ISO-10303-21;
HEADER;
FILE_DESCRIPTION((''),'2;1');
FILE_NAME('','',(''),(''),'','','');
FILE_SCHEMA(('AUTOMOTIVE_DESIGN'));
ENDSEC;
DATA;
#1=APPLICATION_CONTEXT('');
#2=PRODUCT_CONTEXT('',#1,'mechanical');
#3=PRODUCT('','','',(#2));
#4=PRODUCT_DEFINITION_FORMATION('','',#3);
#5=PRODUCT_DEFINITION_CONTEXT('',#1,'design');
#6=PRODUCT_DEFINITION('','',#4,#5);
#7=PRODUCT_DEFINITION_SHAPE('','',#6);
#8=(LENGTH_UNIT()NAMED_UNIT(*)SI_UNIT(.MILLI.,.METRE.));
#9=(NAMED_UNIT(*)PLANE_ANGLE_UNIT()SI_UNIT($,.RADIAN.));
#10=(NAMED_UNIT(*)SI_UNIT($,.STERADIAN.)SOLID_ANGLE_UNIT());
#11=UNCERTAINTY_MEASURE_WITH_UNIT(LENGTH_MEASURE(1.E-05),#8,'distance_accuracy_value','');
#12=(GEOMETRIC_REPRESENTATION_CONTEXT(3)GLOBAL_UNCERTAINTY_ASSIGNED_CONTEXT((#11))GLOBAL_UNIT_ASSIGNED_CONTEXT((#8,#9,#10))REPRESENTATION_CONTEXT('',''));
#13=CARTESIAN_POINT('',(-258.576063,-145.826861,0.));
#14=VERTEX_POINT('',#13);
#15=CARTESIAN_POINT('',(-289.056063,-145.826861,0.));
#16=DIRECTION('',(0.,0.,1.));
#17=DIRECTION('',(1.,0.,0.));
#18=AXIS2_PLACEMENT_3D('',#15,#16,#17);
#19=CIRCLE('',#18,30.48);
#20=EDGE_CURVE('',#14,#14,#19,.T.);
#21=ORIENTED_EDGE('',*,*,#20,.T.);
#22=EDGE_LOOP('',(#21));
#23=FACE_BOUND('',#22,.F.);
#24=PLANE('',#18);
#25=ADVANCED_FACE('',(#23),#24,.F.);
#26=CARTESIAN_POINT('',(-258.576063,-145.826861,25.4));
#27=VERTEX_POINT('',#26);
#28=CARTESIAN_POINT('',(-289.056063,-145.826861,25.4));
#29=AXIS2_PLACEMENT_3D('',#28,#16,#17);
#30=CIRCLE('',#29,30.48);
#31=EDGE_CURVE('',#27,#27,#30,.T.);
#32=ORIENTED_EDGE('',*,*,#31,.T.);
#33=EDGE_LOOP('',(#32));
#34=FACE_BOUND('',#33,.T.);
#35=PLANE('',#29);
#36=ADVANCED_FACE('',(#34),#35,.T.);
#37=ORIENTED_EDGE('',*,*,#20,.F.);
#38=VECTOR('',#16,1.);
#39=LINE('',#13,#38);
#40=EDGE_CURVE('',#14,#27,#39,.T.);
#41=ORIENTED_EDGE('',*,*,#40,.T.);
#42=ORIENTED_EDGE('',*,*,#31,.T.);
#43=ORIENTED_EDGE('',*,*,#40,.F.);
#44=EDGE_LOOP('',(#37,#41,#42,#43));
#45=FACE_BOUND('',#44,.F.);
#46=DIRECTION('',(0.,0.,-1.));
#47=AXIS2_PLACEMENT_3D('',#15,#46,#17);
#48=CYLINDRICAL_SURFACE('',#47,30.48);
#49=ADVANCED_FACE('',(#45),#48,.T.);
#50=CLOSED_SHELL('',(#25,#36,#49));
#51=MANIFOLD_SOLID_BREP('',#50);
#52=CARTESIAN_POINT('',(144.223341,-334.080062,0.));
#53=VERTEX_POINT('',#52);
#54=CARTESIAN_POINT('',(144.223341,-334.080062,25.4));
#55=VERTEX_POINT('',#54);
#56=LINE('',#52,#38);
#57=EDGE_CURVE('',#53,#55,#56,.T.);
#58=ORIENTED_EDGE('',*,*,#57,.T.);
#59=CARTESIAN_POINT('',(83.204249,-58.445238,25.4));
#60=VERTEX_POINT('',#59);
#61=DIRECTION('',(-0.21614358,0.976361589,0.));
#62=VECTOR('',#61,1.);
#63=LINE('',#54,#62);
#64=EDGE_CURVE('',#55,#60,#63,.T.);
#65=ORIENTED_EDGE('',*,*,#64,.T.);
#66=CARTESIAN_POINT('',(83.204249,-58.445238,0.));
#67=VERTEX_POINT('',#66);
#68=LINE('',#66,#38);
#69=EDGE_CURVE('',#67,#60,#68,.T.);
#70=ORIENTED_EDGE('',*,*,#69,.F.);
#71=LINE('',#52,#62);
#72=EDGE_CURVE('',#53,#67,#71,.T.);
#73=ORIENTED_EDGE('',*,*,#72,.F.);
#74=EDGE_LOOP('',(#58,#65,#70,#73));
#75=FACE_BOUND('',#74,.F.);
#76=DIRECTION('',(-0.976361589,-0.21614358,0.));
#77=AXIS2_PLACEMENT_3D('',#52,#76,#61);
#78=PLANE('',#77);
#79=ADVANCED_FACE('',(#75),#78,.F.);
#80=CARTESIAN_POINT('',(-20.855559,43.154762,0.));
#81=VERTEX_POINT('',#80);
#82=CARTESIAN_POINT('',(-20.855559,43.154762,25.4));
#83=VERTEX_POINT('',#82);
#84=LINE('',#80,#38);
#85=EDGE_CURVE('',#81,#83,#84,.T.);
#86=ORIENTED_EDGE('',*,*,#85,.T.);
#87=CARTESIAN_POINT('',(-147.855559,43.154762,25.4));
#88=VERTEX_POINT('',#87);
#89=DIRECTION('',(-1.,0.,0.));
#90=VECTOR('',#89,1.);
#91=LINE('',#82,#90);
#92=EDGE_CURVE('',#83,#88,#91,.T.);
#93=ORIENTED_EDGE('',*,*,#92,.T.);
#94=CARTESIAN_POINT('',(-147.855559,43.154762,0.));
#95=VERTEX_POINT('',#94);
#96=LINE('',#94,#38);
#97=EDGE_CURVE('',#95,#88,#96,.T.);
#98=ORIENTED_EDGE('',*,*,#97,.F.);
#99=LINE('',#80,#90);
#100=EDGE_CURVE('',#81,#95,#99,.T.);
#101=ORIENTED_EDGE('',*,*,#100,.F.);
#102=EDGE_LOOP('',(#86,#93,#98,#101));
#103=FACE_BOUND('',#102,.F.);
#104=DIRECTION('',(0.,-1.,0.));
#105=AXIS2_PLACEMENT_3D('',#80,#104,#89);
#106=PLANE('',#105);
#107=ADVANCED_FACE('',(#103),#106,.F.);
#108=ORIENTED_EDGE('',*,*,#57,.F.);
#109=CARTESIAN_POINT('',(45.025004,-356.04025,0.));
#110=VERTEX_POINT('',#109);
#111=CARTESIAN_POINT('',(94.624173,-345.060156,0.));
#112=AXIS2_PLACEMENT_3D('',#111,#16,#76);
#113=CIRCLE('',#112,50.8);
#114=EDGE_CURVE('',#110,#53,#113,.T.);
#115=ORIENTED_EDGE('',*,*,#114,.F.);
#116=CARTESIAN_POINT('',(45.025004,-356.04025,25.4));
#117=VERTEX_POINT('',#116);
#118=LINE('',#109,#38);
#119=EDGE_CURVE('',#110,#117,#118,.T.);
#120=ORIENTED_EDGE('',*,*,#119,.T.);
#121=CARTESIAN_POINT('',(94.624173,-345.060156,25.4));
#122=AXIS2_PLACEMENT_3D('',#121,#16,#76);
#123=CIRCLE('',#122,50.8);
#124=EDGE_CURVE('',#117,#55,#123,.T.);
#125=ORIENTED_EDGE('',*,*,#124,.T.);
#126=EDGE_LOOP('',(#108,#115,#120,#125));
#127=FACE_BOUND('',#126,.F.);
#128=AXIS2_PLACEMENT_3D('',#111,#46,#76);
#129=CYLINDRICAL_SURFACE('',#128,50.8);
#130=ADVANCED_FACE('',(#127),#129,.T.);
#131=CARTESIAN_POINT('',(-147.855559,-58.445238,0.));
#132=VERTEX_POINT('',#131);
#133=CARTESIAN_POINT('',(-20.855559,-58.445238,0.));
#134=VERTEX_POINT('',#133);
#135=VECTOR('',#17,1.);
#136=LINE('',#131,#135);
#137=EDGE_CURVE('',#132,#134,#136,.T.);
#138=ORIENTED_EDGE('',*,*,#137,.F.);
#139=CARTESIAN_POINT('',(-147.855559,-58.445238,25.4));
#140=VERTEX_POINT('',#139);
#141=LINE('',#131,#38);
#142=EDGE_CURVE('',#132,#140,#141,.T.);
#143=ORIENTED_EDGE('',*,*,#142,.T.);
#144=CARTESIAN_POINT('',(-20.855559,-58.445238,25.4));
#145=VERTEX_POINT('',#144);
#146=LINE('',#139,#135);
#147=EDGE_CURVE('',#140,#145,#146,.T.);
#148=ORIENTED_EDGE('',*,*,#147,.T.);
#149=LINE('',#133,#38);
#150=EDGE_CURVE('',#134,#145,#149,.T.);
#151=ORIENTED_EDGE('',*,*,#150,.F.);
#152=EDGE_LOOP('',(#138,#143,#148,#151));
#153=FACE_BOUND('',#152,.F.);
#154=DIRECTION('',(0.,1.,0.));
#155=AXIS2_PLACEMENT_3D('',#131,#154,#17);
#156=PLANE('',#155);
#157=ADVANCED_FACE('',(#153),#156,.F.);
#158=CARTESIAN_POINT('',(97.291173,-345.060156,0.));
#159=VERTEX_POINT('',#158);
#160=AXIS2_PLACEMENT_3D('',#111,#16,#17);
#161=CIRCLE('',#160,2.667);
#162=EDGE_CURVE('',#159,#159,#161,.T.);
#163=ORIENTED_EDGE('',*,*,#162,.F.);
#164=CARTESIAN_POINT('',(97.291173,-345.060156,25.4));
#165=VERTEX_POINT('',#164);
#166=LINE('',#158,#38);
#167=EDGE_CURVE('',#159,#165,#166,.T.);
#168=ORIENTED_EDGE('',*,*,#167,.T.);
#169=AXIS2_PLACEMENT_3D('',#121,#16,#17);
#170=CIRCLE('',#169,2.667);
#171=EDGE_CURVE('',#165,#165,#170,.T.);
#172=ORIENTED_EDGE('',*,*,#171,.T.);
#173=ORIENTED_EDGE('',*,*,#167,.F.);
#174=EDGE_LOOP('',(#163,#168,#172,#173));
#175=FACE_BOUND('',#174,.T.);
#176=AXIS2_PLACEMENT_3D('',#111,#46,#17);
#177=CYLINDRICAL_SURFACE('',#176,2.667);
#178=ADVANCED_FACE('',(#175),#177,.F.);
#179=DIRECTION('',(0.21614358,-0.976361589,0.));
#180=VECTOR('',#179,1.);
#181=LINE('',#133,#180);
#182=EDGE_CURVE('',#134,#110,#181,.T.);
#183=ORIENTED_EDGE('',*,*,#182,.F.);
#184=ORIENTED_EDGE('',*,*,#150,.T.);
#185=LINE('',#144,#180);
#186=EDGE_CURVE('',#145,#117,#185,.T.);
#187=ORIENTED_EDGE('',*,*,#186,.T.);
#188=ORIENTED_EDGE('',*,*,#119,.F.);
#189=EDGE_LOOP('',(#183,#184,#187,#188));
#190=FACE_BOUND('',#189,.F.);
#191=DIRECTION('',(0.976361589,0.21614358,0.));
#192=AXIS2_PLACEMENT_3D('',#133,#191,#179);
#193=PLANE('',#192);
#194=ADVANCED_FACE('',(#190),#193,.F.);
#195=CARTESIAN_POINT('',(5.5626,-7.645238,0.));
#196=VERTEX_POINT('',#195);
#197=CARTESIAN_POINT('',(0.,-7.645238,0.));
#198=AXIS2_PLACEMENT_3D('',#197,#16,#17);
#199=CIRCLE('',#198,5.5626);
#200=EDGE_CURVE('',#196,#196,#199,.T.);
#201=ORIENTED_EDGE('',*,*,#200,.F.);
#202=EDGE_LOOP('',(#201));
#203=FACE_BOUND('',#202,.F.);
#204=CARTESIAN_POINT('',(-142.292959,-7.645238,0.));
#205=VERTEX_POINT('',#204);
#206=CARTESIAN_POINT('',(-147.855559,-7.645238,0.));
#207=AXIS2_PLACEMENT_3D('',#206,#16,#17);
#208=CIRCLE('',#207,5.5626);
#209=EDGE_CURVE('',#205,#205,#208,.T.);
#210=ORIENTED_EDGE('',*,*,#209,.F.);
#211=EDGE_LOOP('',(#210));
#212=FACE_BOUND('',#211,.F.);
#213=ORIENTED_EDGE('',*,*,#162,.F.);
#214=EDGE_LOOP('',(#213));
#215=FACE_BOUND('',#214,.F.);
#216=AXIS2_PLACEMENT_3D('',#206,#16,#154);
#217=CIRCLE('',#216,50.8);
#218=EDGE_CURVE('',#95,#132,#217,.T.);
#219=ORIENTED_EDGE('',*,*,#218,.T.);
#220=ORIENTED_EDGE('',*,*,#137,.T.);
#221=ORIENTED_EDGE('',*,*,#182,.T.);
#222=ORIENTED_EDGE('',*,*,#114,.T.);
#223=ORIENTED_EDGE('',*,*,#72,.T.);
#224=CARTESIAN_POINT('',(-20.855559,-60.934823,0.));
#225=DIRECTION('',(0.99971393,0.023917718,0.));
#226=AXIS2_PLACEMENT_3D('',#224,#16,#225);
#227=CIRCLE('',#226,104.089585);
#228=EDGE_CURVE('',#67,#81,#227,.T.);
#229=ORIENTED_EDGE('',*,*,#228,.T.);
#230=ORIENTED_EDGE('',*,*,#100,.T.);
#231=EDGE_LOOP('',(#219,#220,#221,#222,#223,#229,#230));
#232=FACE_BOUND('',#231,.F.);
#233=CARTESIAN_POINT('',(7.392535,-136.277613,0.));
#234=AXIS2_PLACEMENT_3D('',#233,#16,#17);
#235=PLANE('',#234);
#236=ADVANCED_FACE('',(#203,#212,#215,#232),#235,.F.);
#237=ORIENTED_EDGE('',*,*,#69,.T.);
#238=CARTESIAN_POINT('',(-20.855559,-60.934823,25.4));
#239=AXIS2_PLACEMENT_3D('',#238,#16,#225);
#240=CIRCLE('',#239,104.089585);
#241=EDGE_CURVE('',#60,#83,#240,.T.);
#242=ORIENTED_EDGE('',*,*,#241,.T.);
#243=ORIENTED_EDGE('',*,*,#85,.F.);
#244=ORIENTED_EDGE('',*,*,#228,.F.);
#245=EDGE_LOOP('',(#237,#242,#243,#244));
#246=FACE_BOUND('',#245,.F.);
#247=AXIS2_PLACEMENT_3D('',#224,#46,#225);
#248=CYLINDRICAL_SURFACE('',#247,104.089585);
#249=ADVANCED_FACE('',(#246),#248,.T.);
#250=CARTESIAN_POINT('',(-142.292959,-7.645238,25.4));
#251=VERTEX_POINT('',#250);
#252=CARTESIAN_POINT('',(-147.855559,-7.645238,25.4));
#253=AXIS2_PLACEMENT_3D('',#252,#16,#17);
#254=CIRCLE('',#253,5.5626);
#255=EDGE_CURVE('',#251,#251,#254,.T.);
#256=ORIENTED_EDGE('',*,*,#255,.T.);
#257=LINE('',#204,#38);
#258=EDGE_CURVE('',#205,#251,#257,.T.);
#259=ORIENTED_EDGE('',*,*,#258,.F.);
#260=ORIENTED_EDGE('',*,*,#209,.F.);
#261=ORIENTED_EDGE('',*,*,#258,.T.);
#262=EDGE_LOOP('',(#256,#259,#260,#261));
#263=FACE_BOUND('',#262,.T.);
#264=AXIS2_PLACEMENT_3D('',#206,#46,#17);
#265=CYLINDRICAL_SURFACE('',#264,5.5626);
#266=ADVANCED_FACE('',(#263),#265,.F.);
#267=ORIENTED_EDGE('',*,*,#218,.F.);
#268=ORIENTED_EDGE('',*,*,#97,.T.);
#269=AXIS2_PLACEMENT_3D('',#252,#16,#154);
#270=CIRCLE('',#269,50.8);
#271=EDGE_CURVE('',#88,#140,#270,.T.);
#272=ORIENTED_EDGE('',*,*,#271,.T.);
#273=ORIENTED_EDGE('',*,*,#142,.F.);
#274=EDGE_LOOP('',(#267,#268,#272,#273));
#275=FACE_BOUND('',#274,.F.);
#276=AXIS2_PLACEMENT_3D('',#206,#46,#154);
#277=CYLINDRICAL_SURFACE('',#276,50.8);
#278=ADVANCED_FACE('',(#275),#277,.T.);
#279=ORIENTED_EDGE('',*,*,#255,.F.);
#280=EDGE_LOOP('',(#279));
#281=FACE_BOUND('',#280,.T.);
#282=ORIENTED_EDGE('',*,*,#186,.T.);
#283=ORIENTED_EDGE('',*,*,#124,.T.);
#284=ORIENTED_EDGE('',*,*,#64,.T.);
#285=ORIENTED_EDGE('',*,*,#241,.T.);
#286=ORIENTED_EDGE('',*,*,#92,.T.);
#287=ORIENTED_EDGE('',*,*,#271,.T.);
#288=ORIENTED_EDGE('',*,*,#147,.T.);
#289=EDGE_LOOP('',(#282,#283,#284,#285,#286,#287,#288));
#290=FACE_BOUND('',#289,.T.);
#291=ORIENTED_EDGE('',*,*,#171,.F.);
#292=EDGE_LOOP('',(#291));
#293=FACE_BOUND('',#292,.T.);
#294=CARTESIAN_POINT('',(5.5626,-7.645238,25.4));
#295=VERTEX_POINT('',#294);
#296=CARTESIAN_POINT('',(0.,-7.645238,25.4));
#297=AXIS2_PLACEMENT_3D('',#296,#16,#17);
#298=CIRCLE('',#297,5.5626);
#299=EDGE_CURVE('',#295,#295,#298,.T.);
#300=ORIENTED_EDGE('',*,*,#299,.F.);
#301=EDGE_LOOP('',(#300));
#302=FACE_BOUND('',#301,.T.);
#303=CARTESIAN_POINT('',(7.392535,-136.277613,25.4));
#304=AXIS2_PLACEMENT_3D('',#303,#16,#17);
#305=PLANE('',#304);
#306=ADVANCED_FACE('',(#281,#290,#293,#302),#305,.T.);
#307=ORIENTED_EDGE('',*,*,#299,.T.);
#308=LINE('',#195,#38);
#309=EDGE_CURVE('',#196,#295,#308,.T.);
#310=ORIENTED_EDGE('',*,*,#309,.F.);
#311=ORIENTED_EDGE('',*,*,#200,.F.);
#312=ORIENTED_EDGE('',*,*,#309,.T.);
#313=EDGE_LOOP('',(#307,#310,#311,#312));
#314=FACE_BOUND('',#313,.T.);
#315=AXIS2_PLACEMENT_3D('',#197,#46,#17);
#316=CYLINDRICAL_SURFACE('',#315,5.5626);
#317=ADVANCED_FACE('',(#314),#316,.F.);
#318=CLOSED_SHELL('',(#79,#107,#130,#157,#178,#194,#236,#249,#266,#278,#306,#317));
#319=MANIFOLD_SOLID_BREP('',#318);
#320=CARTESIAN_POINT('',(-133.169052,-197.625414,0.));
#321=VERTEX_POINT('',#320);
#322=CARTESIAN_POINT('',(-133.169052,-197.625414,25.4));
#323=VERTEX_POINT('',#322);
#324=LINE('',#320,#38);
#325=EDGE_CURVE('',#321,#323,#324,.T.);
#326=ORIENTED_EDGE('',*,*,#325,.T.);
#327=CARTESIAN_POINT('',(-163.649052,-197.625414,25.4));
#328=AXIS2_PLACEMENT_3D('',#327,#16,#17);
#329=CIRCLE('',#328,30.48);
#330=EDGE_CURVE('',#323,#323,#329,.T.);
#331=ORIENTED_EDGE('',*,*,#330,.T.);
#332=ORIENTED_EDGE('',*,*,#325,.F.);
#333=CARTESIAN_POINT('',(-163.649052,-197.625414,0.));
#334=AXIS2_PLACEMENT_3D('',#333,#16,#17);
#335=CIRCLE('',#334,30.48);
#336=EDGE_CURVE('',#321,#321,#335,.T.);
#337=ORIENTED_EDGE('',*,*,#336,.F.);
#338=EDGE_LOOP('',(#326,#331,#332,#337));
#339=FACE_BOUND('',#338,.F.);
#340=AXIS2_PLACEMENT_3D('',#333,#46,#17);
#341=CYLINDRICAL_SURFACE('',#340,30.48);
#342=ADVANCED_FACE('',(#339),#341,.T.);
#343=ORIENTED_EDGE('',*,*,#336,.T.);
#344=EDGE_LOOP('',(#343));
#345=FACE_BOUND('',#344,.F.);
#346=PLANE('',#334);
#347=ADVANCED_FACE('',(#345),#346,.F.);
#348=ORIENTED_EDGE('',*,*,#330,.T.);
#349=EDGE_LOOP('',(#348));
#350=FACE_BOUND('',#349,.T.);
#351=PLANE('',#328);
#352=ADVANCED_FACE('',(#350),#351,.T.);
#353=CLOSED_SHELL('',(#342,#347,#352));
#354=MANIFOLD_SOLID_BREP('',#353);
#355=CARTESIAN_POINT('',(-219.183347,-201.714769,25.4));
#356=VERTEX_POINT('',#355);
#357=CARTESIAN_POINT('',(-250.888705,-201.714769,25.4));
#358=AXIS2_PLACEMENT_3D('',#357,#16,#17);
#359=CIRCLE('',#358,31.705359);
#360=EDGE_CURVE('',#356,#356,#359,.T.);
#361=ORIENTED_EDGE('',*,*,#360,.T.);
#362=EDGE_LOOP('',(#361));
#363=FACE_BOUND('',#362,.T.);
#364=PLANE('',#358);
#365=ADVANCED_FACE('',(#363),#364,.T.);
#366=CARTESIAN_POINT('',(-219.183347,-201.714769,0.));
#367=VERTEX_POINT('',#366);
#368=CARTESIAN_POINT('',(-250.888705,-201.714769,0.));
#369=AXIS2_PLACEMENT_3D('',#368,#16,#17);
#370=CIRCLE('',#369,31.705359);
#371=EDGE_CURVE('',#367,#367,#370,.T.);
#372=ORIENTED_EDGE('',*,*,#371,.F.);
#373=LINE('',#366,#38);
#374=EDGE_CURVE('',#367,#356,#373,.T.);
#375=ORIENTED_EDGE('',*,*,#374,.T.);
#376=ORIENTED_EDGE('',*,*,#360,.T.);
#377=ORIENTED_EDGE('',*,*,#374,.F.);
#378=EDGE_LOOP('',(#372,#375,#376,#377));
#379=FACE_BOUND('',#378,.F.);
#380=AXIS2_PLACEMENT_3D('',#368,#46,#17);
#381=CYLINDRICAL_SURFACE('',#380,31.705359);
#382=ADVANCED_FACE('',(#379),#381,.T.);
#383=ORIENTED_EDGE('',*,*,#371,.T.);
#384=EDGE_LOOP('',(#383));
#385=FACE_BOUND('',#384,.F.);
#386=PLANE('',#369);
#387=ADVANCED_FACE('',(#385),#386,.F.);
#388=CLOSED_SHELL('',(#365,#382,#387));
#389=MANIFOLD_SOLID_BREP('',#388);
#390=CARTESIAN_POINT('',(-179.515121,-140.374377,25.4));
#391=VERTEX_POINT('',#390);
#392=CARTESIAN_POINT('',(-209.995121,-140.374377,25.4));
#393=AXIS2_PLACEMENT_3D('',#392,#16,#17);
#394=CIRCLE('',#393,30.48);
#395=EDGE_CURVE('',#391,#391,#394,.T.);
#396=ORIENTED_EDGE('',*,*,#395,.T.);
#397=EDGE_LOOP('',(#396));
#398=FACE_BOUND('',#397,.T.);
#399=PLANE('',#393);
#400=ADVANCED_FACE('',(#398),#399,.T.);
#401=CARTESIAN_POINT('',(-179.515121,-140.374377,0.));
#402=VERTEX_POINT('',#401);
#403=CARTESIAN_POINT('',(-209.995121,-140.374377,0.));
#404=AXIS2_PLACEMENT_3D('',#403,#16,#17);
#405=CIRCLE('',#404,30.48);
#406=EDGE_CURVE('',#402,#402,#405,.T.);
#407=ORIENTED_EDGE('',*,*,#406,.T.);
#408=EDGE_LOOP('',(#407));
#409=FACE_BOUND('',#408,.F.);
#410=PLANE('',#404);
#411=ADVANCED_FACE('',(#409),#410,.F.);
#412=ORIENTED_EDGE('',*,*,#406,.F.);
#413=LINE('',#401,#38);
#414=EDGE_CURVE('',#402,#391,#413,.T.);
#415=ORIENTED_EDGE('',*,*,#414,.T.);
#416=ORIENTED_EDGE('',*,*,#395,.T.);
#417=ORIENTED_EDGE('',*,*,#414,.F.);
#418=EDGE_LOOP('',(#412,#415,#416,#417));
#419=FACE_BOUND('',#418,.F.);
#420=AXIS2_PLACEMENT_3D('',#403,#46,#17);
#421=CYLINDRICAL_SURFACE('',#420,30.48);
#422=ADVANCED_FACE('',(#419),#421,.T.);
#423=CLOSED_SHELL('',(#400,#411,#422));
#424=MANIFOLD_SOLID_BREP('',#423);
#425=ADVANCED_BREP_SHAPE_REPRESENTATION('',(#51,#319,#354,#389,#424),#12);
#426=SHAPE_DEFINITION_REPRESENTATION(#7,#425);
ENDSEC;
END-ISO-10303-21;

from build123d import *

# Parameters (mm, degrees)
F0_R     = 30.48
F1_DEPTH = 25.4
F0_R_2   = 31.7053585068
F0_R_3   = 2.667
F0_R_4   = 5.5626


# Not quite as in the source:
# - a feature names something its author has since deleted; it is built from what else it names


with BuildPart() as f1:
    # F0 (on Top) → F1 (new body)
    with BuildSketch(Plane.XY):
        with Locations((-209.9951207638, -140.3743773699)):
            Circle(F0_R)
    extrude(amount=F1_DEPTH)


with BuildPart() as f1b:
    # F0 (on Top) → F1, piece 2 (new body)
    with BuildSketch(Plane.XY):
        with Locations((-163.6490523815, -197.625413537)):
            Circle(F0_R)
    extrude(amount=F1_DEPTH)


with BuildPart() as f1c:
    # F0 (on Top) → F1, piece 3 (new body)
    with BuildSketch(Plane.XY):
        with Locations((-250.8887052536, -201.7147690058)):
            Circle(F0_R_2)
    extrude(amount=F1_DEPTH)


with BuildPart() as f1d:
    # F0 (on Top) → F1, piece 4 (new body)
    with BuildSketch(Plane.XY):
        with Locations((-289.0560626984, -145.8268612623)):
            Circle(F0_R)
    extrude(amount=F1_DEPTH)


with BuildPart() as f1e:
    # F0 (on Top) → F1, piece 5 (new body)
    with BuildSketch(Plane.XY):
        with BuildLine():
            Line((-147.8555590361, -58.445237577), (-20.8555590361, -58.445237577))
            Line((-20.8555590361, -58.445237577), (45.0250040162, -356.040249988))
            ThreePointArc((45.0250040162, -356.040249988), (105.6042665934, -394.6593248811), (144.2233414865, -334.0800623039))
            Line((144.2233414865, -334.0800623039), (83.204249457, -58.445237577))
            ThreePointArc((83.204249457, -58.445237577), (51.8613642755, 13.5426289801), (-20.8555590361, 43.154762423))
            Line((-20.8555590361, 43.154762423), (-147.8555590361, 43.154762423))
            ThreePointArc((-147.8555590361, 43.154762423), (-198.6555590361, -7.645237577), (-147.8555590361, -58.445237577))
        make_face()
        with Locations((94.6241727513, -345.0601561459)):
            Circle(F0_R_3, mode=Mode.SUBTRACT)
        with Locations((-147.8555590361, -7.645237577)):
            Circle(F0_R_4, mode=Mode.SUBTRACT)
        with Locations((0, -7.645237577)):
            Circle(F0_R_4, mode=Mode.SUBTRACT)
    extrude(amount=F1_DEPTH)


solid = Compound([f1.part, f1b.part, f1c.part, f1d.part, f1e.part])
